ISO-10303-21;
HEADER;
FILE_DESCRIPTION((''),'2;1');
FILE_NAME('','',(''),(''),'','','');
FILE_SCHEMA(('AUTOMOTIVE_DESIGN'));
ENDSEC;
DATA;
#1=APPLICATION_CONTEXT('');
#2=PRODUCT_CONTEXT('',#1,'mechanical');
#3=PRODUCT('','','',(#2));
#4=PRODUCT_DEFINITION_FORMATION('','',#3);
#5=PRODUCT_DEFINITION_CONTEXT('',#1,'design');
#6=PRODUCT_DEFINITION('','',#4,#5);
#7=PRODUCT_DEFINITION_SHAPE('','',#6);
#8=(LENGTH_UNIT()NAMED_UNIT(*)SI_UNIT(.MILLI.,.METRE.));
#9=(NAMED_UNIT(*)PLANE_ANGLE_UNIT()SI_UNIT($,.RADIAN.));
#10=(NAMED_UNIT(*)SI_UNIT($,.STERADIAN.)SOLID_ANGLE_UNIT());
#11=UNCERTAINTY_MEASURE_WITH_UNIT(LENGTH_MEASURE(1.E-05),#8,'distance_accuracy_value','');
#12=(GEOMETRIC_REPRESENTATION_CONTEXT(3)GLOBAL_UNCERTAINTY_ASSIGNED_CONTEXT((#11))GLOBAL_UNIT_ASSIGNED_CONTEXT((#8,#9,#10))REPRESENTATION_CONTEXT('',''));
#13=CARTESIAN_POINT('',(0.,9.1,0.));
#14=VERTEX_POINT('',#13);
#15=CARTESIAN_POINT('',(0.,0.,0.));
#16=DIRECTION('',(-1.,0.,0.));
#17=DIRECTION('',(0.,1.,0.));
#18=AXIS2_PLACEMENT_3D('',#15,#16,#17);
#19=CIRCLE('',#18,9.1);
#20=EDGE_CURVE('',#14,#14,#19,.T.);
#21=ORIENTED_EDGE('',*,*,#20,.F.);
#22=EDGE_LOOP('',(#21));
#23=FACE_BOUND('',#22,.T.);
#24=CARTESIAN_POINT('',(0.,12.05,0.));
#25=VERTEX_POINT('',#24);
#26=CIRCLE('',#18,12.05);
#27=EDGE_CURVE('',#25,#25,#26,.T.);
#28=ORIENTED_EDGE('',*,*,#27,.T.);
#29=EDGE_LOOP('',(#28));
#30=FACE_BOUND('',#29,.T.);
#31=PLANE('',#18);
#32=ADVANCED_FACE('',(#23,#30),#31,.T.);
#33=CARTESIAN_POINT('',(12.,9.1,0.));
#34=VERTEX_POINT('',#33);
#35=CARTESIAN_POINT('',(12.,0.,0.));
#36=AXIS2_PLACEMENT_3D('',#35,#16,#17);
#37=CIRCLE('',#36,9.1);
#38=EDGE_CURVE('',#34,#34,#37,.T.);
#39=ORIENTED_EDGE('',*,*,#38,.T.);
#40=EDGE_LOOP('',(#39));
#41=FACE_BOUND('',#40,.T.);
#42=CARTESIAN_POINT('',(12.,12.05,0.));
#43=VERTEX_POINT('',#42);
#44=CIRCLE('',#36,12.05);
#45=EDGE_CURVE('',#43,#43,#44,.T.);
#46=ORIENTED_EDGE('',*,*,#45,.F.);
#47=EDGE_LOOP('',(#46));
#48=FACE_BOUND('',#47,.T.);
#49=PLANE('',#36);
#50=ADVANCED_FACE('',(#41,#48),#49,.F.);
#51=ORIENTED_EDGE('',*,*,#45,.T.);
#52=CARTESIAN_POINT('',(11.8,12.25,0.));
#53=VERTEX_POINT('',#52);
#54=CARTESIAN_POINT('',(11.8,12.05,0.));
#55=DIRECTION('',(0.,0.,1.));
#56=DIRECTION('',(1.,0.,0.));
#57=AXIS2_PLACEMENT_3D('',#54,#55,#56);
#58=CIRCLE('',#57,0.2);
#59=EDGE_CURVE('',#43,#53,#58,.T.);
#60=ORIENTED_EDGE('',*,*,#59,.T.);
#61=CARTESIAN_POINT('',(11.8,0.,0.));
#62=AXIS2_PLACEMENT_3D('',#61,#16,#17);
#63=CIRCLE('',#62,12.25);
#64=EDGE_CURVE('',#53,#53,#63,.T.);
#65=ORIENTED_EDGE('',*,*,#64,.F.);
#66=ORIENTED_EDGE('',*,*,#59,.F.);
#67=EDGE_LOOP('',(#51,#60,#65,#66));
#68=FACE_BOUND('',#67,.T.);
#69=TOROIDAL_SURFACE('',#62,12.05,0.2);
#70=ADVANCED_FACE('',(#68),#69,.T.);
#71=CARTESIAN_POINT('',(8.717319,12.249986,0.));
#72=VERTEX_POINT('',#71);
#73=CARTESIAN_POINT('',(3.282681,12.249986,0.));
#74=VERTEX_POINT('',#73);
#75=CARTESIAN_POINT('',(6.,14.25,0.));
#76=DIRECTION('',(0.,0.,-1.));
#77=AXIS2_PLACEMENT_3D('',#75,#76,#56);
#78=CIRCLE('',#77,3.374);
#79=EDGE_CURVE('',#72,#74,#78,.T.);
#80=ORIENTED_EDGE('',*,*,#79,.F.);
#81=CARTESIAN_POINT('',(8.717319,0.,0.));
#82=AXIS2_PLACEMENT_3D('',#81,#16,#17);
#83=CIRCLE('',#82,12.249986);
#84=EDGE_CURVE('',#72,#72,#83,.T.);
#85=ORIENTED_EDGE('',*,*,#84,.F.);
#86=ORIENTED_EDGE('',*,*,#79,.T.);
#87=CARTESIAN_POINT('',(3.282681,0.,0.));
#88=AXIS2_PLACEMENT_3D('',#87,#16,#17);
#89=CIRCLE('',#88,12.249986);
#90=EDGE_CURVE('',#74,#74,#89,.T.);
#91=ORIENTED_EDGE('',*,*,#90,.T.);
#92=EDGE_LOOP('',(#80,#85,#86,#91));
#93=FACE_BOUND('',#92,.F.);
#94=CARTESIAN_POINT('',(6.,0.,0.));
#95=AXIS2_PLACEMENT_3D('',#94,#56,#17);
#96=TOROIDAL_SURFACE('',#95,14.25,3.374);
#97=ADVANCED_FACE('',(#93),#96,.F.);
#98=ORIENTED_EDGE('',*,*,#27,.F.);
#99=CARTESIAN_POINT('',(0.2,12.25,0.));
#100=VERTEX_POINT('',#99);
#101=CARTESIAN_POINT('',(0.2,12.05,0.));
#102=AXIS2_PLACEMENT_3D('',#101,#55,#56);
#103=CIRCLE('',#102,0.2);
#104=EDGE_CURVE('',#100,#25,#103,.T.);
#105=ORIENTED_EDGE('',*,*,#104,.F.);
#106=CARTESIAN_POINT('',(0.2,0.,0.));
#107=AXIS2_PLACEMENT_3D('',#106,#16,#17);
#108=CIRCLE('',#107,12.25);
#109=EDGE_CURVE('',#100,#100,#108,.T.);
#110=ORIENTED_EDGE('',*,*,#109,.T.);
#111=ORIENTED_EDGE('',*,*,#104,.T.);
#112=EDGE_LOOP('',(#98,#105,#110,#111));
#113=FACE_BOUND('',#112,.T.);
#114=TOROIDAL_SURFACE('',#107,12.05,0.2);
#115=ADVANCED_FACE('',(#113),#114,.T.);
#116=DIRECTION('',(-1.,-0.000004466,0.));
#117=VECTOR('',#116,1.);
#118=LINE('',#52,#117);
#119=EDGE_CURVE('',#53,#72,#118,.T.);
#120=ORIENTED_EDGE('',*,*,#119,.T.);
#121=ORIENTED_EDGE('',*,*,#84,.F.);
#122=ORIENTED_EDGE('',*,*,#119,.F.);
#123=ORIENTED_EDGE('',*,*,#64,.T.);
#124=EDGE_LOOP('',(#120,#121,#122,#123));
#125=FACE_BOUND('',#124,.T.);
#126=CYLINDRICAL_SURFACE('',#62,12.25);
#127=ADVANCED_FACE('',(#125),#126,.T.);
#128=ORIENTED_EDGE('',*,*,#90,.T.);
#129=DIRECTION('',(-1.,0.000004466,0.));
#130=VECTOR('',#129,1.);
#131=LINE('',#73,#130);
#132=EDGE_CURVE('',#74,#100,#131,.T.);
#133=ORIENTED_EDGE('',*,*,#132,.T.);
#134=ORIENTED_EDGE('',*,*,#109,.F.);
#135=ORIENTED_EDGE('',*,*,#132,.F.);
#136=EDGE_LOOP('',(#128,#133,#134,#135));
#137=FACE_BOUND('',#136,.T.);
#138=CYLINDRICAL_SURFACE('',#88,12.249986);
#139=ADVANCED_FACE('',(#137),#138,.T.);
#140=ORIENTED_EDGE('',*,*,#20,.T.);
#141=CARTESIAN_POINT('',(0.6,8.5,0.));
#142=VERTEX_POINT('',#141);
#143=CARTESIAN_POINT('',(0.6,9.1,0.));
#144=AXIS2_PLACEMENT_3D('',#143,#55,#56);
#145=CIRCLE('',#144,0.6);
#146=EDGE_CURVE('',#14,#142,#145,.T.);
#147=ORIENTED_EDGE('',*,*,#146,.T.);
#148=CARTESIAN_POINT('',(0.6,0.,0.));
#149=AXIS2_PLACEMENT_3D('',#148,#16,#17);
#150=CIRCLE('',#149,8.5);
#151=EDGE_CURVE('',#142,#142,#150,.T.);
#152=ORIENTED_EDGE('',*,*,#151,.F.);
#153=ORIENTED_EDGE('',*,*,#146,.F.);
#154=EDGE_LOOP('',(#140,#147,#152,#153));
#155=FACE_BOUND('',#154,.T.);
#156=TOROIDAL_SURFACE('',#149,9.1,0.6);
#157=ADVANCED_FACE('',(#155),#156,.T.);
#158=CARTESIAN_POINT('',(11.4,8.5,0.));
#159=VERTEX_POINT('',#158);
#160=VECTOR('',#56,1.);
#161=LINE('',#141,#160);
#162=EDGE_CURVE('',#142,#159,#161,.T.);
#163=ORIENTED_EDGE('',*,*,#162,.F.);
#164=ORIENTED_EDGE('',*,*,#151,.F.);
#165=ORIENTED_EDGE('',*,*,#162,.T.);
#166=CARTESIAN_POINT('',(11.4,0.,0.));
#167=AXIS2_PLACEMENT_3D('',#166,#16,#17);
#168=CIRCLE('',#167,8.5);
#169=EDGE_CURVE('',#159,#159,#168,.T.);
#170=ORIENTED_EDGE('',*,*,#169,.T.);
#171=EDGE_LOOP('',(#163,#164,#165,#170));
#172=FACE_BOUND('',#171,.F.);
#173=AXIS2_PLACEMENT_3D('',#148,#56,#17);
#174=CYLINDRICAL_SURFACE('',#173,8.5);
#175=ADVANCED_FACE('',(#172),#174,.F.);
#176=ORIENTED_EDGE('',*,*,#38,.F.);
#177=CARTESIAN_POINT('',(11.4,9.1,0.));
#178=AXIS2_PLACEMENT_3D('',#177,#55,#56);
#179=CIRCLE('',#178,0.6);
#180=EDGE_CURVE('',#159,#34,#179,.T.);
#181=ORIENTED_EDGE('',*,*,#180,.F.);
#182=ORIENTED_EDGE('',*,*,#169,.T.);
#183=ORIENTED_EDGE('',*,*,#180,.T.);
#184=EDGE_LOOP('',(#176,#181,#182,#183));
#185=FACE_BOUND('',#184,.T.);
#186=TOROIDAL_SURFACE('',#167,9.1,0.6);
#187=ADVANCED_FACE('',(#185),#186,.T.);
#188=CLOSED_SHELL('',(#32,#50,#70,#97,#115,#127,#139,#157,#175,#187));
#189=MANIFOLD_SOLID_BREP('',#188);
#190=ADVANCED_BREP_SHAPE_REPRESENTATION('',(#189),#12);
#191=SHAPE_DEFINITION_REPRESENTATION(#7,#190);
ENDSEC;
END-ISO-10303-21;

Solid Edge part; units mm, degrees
sketch "Sketch1" plane through (0, 0, 0) normal (0, 0, 1) x (1, 0, 0)
  arc A0 (0, 9.1) -> (0.6, 8.5) centre (0.6, 9.1) ccw
  line L0 (0.6, 8.5) -> (11.4, 8.5)
  arc A1 (11.4, 8.5) -> (12, 9.1) centre (11.4, 9.1) ccw
  line L1 (12, 9.1) -> (12, 12.05)
  arc A2 (12, 12.05) -> (11.8, 12.25) centre (11.8, 12.05) ccw
  line L2 (11.8, 12.25) -> (8.7173, 12.25)
  arc A3 (8.7173, 12.25) -> (3.2827, 12.25) centre (6, 14.25) cw
  line L3 (3.2827, 12.25) -> (0.2, 12.25)
  arc A4 (0.2, 12.25) -> (0, 12.05) centre (0.2, 12.05) ccw
  line L4 (0, 12.05) -> (0, 9.1)
revolve "RevolvedProtrusion1" add sketch "Sketch1" angle 360 about axis through (11.4, 0, 0) along (-1, 0, 0)
